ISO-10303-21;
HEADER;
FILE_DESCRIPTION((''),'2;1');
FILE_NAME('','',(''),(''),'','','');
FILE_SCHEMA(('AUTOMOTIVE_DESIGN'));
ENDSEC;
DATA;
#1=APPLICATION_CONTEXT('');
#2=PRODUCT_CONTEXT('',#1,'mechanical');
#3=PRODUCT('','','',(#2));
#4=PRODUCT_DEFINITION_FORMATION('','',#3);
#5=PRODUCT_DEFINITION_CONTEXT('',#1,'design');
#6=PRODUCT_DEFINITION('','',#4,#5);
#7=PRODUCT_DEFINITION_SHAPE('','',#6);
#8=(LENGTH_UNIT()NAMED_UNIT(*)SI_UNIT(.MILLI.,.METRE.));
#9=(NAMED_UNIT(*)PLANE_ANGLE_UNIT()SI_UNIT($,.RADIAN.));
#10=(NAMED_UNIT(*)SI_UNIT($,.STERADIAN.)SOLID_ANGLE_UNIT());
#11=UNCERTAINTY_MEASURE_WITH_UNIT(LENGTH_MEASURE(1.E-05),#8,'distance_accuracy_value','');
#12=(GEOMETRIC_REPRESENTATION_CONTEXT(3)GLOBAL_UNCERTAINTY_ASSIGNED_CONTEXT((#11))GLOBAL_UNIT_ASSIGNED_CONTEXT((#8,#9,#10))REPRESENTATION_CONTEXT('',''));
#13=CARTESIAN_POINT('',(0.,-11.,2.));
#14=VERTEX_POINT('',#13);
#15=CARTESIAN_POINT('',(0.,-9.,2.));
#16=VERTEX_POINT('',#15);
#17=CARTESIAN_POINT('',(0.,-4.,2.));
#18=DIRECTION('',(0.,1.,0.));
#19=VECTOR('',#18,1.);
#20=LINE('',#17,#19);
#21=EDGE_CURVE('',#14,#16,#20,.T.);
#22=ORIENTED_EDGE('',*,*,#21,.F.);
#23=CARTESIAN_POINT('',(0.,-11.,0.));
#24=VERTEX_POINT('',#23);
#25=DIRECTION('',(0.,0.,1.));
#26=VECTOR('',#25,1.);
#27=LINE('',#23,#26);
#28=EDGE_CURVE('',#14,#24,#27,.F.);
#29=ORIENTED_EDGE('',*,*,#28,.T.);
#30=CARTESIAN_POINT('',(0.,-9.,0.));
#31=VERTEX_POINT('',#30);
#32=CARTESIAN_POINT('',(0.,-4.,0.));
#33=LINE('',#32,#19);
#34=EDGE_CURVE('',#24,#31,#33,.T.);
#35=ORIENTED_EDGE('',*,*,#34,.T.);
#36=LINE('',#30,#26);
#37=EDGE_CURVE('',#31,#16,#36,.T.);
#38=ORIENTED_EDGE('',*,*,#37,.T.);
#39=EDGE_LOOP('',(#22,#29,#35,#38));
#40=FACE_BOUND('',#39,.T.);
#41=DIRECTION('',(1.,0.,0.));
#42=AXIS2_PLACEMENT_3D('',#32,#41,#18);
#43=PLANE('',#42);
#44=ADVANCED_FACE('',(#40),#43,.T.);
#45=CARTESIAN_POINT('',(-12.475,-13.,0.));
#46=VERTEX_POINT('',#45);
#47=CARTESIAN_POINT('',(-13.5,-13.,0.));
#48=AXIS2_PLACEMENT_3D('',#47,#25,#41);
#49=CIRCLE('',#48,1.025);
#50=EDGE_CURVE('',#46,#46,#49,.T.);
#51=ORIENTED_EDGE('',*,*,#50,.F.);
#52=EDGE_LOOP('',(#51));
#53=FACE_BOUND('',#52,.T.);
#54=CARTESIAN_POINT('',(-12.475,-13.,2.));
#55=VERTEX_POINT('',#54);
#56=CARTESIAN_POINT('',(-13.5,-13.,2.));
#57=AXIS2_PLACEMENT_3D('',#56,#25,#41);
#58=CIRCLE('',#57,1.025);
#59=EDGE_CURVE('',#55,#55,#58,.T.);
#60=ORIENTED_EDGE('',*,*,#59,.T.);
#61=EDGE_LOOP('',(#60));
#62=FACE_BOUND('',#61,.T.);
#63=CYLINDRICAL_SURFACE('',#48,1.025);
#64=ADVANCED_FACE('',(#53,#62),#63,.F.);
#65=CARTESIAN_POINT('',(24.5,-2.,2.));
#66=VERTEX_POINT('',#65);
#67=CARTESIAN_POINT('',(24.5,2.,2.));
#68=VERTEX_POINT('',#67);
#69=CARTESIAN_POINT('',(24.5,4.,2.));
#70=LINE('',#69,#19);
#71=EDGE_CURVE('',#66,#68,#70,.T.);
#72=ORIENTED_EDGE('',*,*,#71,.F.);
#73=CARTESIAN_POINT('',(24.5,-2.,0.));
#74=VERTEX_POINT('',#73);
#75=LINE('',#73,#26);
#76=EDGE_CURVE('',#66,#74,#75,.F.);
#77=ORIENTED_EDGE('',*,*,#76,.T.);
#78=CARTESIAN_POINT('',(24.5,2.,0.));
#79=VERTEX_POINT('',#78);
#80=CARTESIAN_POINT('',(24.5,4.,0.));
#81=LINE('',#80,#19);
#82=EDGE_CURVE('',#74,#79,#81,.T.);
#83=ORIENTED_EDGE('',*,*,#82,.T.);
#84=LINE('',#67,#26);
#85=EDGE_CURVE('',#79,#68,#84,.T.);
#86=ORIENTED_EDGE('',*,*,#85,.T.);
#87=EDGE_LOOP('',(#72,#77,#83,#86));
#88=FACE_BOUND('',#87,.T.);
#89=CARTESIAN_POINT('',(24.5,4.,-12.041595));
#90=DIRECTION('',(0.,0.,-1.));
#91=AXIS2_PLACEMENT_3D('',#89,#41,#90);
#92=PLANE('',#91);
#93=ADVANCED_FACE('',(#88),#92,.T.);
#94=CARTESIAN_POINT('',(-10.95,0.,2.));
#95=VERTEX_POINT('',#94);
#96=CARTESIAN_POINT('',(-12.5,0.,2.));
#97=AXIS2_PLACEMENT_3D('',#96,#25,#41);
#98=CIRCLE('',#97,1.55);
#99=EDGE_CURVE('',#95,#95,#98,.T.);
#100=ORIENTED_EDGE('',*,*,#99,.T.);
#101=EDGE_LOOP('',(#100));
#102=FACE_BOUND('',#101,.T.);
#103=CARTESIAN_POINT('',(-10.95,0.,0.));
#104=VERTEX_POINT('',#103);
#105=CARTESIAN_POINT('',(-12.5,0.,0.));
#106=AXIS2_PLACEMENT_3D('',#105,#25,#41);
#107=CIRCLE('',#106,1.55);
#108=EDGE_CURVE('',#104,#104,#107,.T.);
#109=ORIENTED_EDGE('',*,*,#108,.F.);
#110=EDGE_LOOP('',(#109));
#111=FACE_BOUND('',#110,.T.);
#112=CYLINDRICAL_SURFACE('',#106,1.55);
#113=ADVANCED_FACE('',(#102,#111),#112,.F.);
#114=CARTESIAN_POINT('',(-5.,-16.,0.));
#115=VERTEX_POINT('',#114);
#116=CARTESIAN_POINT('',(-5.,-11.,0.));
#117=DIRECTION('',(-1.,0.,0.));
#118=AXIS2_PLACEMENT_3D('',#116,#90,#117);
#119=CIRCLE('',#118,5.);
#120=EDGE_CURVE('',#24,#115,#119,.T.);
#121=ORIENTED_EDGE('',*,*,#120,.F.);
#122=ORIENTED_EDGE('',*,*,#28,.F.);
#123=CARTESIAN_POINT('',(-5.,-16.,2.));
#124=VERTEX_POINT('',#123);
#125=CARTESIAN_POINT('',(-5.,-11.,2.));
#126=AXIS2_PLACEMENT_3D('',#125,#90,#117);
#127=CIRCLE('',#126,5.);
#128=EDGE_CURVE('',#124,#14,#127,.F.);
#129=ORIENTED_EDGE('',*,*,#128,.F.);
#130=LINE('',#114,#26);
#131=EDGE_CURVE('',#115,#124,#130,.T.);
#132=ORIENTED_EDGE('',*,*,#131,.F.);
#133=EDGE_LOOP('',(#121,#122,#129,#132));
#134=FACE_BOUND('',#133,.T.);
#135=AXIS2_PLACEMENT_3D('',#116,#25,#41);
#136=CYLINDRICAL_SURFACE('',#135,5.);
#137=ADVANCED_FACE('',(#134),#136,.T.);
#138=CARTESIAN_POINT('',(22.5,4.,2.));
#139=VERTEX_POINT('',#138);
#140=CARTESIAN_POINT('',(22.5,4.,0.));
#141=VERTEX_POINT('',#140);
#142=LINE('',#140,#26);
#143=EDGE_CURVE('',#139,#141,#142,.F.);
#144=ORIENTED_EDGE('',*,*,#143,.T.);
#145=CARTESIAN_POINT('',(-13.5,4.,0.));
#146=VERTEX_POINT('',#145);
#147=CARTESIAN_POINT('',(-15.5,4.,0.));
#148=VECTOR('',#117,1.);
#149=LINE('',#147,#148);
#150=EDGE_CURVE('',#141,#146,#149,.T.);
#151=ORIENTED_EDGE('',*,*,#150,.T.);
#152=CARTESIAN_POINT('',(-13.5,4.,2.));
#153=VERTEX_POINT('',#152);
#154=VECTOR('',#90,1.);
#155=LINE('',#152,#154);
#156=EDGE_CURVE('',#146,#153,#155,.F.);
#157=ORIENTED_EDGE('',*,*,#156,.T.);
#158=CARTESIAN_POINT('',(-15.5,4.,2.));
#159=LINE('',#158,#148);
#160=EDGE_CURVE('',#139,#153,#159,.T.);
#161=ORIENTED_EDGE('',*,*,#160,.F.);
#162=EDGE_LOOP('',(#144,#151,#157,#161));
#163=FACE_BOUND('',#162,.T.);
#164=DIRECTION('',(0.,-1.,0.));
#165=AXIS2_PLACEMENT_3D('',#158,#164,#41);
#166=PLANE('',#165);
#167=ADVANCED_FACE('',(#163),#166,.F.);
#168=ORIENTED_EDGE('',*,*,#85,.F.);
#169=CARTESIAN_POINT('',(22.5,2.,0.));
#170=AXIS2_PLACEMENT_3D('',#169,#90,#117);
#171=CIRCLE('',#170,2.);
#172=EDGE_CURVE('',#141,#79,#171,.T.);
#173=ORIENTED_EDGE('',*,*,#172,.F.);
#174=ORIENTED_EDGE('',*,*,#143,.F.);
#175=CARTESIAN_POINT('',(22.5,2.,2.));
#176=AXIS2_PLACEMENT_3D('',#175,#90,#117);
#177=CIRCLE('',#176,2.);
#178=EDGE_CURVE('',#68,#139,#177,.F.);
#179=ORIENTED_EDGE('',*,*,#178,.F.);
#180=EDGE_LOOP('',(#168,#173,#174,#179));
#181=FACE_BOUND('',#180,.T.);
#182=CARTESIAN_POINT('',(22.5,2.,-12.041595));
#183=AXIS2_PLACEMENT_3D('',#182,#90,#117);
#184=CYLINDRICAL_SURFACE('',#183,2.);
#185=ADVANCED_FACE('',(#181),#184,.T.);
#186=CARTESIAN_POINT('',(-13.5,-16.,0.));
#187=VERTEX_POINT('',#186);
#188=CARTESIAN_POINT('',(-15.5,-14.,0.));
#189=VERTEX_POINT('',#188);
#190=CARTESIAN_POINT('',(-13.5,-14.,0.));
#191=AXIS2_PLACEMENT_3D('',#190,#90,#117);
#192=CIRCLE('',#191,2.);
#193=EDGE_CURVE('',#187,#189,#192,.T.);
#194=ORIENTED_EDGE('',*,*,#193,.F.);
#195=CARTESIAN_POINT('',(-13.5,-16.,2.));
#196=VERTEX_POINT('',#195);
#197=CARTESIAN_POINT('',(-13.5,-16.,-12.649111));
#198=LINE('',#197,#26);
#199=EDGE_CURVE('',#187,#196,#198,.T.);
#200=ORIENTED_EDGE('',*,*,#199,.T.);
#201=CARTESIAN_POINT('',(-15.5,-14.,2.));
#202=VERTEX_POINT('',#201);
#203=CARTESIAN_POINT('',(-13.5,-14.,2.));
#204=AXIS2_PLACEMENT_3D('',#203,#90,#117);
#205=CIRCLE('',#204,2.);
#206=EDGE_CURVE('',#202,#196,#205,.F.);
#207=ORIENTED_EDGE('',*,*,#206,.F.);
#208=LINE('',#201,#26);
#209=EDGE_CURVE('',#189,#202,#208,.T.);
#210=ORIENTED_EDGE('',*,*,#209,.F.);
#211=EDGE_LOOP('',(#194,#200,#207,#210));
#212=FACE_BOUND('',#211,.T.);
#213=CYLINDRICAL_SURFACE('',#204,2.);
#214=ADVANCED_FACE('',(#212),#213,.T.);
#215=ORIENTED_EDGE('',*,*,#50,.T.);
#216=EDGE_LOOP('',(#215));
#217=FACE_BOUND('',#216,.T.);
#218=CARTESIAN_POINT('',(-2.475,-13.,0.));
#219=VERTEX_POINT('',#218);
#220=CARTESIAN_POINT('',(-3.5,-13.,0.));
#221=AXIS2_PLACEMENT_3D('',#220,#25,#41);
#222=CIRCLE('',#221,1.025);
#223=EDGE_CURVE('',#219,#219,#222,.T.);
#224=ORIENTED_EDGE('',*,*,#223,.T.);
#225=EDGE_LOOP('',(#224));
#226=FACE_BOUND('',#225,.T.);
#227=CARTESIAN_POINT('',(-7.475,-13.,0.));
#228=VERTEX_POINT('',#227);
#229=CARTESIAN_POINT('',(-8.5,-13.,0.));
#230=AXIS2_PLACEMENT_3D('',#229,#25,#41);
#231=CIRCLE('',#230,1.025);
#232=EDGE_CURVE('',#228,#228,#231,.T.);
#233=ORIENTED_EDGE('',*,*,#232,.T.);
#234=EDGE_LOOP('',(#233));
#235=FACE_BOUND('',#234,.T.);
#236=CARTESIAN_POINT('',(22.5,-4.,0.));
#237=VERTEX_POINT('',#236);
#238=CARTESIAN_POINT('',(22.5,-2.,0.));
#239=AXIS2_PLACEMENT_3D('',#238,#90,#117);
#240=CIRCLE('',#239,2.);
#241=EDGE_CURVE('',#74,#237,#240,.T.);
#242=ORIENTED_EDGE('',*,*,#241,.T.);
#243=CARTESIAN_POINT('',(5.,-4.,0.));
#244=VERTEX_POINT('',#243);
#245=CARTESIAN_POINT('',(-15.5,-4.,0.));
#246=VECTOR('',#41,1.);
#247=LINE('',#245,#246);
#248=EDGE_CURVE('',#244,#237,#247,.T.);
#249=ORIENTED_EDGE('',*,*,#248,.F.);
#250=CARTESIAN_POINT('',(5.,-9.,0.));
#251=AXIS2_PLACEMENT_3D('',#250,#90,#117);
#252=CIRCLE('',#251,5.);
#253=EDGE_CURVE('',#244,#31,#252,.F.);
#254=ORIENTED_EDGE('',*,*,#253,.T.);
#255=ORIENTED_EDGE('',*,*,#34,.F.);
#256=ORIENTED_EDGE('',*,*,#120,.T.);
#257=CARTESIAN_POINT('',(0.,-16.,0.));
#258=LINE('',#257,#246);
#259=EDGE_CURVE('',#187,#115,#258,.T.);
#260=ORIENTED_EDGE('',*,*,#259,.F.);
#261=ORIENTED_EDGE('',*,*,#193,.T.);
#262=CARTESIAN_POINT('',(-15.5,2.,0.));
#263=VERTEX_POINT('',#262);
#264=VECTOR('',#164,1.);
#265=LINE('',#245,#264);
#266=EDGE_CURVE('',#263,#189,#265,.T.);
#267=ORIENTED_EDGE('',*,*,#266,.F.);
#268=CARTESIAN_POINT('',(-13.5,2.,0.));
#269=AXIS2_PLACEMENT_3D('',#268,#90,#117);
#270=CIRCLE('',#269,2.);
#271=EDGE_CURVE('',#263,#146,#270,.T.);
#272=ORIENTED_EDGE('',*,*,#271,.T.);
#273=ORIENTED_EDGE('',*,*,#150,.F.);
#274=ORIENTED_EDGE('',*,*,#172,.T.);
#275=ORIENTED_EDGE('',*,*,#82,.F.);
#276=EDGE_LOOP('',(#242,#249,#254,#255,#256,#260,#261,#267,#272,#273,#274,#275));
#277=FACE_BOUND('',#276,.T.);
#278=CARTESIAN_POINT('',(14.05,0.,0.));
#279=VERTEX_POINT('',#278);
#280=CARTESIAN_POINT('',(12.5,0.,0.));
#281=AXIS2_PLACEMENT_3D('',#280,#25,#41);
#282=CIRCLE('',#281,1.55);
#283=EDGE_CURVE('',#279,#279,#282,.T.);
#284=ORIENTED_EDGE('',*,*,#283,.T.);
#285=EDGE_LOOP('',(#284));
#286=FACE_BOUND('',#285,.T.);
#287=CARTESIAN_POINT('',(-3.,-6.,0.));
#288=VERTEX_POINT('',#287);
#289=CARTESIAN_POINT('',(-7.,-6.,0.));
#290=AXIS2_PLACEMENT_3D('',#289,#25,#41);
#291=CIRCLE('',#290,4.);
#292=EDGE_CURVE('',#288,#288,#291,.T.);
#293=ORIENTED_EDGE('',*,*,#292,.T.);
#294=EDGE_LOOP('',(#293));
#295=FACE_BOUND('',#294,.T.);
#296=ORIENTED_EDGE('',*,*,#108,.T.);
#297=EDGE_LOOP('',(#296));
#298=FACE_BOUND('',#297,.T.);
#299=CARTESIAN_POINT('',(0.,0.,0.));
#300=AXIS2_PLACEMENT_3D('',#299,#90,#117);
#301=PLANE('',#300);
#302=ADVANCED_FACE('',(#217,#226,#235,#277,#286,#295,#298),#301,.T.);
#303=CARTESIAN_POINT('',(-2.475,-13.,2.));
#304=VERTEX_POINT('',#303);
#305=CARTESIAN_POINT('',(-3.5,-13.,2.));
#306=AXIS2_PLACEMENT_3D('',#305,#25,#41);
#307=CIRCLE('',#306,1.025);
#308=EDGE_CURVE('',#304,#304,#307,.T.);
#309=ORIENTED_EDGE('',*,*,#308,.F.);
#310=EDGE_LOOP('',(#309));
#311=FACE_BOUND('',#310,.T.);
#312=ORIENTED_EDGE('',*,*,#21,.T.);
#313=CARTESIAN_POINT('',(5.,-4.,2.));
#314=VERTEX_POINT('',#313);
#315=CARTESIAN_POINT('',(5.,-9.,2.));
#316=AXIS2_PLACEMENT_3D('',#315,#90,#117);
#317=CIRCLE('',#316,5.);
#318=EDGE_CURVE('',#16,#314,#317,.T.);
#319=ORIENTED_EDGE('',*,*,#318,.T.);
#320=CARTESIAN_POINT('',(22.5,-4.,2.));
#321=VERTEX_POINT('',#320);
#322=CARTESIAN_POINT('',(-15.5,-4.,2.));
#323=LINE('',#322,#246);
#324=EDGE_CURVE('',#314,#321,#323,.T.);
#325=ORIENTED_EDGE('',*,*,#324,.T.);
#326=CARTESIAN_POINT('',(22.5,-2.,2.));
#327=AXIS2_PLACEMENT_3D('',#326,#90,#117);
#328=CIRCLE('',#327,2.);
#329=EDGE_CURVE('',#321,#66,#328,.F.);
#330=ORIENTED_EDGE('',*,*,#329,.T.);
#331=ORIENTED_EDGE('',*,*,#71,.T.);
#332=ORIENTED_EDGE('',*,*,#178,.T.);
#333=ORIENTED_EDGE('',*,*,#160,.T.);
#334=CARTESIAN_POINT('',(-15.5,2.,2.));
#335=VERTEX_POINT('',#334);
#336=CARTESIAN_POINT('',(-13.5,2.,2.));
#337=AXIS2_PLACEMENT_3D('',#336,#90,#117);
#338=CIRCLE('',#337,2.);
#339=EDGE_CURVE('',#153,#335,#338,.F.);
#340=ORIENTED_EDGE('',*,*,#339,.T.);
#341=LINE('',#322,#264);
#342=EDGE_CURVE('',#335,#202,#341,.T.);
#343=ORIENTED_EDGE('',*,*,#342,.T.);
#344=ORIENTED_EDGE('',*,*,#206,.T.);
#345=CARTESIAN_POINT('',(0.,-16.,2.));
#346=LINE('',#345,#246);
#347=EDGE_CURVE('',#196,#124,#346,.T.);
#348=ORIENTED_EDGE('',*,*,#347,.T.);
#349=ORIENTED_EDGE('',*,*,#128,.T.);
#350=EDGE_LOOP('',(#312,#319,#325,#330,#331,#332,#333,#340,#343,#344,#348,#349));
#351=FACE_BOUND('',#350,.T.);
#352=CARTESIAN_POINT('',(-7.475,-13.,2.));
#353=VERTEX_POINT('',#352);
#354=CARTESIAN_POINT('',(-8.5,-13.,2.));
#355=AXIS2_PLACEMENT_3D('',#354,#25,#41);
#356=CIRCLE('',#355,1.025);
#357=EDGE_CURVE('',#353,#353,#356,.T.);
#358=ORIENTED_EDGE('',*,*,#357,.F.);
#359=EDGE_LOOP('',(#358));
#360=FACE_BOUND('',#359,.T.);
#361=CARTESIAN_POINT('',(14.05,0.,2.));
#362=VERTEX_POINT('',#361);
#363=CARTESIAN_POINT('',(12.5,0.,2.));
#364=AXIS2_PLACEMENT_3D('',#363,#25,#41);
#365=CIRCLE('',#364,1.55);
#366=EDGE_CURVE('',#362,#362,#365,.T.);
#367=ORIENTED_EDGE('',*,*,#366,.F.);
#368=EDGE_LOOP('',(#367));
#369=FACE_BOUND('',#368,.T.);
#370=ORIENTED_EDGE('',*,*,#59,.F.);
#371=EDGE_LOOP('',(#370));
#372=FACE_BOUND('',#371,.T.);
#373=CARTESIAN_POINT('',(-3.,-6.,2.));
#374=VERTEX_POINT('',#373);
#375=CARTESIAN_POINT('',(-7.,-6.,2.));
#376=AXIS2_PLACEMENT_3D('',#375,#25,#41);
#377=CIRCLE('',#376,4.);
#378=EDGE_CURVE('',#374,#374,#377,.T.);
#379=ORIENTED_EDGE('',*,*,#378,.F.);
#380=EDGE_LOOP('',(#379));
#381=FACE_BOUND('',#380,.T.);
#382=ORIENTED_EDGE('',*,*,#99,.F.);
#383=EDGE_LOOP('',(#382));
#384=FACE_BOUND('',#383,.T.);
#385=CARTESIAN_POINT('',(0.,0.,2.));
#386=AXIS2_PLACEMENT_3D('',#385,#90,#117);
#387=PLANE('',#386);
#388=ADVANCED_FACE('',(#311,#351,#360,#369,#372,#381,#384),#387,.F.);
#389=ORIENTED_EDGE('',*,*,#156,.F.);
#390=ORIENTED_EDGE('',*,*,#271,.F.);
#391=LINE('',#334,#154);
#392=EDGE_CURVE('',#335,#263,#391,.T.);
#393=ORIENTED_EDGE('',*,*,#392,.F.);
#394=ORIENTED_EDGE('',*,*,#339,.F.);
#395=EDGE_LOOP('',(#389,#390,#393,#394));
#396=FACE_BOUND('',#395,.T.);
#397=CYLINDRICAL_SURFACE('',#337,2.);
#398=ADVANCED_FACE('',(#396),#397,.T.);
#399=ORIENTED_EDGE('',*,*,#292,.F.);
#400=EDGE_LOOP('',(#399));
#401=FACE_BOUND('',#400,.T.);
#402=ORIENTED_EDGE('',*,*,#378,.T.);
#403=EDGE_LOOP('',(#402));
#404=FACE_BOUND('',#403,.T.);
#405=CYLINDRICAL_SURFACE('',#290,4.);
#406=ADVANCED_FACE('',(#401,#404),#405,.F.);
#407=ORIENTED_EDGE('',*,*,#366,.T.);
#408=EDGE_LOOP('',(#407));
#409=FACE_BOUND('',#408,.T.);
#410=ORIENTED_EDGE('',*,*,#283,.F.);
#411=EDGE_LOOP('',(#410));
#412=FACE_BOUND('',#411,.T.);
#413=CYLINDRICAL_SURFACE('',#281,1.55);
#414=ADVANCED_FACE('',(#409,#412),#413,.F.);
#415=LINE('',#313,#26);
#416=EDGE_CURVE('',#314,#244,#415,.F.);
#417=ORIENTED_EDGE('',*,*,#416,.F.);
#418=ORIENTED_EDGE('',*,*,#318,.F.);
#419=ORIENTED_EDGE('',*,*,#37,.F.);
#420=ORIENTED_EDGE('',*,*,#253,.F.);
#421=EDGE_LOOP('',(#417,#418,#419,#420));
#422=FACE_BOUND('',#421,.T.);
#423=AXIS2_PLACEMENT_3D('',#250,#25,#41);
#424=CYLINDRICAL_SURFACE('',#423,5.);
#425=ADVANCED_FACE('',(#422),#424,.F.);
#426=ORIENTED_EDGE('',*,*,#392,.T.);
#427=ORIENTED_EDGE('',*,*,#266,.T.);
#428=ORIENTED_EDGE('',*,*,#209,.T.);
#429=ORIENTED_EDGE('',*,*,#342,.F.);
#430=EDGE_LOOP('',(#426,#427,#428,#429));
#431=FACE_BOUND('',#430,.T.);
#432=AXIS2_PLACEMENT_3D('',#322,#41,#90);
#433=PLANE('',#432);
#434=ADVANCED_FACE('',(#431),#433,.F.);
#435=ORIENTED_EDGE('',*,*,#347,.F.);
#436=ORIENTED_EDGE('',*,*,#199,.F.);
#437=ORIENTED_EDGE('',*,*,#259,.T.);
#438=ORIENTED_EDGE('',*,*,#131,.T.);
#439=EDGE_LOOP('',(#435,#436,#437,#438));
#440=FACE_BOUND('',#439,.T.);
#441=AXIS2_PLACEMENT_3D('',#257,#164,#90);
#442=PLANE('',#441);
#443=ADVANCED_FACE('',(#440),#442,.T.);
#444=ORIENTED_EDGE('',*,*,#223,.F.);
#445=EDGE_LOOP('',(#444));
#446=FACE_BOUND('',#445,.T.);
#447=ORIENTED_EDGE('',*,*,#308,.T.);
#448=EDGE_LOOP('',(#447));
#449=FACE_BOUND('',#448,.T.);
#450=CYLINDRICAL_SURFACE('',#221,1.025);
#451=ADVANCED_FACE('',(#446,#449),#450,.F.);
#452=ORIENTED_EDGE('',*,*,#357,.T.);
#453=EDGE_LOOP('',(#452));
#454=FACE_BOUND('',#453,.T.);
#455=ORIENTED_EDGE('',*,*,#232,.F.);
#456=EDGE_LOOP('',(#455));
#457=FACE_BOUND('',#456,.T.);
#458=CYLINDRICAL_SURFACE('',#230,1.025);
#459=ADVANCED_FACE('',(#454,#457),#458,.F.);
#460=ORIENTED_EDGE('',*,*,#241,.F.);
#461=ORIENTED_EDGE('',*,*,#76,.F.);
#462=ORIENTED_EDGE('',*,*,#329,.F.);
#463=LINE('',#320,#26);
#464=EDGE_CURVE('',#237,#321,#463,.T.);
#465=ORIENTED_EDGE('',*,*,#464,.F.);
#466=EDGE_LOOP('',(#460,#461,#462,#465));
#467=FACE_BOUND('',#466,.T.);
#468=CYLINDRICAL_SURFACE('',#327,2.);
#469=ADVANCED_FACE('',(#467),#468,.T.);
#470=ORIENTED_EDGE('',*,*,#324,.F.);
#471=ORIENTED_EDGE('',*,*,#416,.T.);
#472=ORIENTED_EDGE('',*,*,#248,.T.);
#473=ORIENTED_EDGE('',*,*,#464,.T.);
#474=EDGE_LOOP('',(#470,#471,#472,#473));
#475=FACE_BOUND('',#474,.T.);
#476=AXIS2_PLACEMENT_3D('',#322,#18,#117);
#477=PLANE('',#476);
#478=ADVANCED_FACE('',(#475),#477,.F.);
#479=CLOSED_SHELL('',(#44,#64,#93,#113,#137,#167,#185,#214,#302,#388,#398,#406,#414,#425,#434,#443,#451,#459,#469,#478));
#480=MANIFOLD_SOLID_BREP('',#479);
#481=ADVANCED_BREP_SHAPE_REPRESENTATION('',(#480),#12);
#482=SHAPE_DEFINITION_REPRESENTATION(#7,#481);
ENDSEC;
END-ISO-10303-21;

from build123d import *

# Parameters (mm, degrees)
SKETCH_2_W          = 31
SKETCH_2_H          = 8
EXTRUDE_1_DEPTH     = 2
SKETCH_3_R          = 1.55
CUT_EXTRUDE_1_DEPTH = 2
SKETCH_4_W          = 4
SKETCH_4_H          = 12
EXTRUDE_2_DEPTH     = 2
SKETCH_5_R          = 1.025
CUT_EXTRUDE_2_DEPTH = 2
SKETCH_6_W          = 9
SKETCH_6_H          = 8
EXTRUDE_3_DEPTH     = 2
FILLET_1_R          = 2
EXTRUDE_START       = -2
EXTRUDE_4_OUTLINE_R = 1.025
EXTRUDE_4_DEPTH     = 2
FILLET_2_R          = 5
SKETCH_8_R          = 4
CUT_EXTRUDE_3_DEPTH = 2


# Read off the part's stored shape, not the designer's step: 凸台-拉伸4
with BuildPart() as part:
    # 草图2 → 凸台-拉伸1 (new body)
    with BuildSketch(Plane.XY):
        Rectangle(SKETCH_2_W, SKETCH_2_H)
    extrude(amount=EXTRUDE_1_DEPTH)

    # 草图3 → 切除-拉伸1 (cut)
    with BuildSketch(Plane.XY.offset(2)):
        with Locations((12.5, 0)):
            Circle(SKETCH_3_R)
        with Locations((-12.5, 0)):
            Circle(SKETCH_3_R)
    extrude(amount=-CUT_EXTRUDE_1_DEPTH, mode=Mode.SUBTRACT)

    # 草图4 → 凸台-拉伸2 (add)
    with BuildSketch(Plane.XY.offset(2)):
        with Locations((-13.5, -10)):
            Rectangle(SKETCH_4_W, SKETCH_4_H)
    extrude(amount=-EXTRUDE_2_DEPTH)

    # 草图5 → 切除-拉伸2 (cut)
    with BuildSketch(Plane.XY.offset(2)):
        with Locations((-13.5, -13)):
            Circle(SKETCH_5_R)
    extrude(amount=-CUT_EXTRUDE_2_DEPTH, mode=Mode.SUBTRACT)

    # 草图6 → 凸台-拉伸3 (add)
    with BuildSketch(Plane.XY.offset(2)):
        with Locations((20, 0)):
            Rectangle(SKETCH_6_W, SKETCH_6_H)
    extrude(amount=-EXTRUDE_3_DEPTH)

    # 圆角1
    fillet_1_edges = [part.edges().sort_by_distance(p)[0] for p in [
        (-15.5, -16, 1),
        (-11.5, -16, 1),
        (-11.5, -4, 1),
        (-15.5, 4, 1),
        (24.5, -4, 1),
        (24.5, 4, 1),
    ]]
    fillet(fillet_1_edges, radius=FILLET_1_R - 0.0001)  # a hair under: the kernel refuses the full size

    # 凸台-拉伸4 outline → 凸台-拉伸4 (add)
    with BuildSketch(Plane.XY.offset(2).offset(EXTRUDE_START)):
        with BuildLine():
            Line((-13.5, -16), (0, -16))
            Line((0, -16), (0, -4))
            Line((0, -4), (-11.499999994, -4))
            Line((-11.499999994, -4), (-11.5, -14))
            ThreePointArc((-11.5, -14), (-12.085786438, -15.414213562), (-13.5, -16))
        make_face()
        with Locations((-8.5, -13)):
            Circle(EXTRUDE_4_OUTLINE_R, mode=Mode.SUBTRACT)
        with Locations((-3.5, -13)):
            Circle(EXTRUDE_4_OUTLINE_R, mode=Mode.SUBTRACT)
    extrude(amount=EXTRUDE_4_DEPTH)

    # 圆角2
    fillet_2_edges = [part.edges().sort_by_distance(p)[0] for p in [
        (0, -4, 1),
        (0, -16, 1),
    ]]
    fillet(fillet_2_edges, radius=FILLET_2_R)

    # 草图8 → 切除-拉伸3 (cut)
    with BuildSketch(Plane.XY.offset(2)):
        with Locations((-7, -6)):
            Circle(SKETCH_8_R)
    extrude(amount=-CUT_EXTRUDE_3_DEPTH, mode=Mode.SUBTRACT)


solid = part.part
